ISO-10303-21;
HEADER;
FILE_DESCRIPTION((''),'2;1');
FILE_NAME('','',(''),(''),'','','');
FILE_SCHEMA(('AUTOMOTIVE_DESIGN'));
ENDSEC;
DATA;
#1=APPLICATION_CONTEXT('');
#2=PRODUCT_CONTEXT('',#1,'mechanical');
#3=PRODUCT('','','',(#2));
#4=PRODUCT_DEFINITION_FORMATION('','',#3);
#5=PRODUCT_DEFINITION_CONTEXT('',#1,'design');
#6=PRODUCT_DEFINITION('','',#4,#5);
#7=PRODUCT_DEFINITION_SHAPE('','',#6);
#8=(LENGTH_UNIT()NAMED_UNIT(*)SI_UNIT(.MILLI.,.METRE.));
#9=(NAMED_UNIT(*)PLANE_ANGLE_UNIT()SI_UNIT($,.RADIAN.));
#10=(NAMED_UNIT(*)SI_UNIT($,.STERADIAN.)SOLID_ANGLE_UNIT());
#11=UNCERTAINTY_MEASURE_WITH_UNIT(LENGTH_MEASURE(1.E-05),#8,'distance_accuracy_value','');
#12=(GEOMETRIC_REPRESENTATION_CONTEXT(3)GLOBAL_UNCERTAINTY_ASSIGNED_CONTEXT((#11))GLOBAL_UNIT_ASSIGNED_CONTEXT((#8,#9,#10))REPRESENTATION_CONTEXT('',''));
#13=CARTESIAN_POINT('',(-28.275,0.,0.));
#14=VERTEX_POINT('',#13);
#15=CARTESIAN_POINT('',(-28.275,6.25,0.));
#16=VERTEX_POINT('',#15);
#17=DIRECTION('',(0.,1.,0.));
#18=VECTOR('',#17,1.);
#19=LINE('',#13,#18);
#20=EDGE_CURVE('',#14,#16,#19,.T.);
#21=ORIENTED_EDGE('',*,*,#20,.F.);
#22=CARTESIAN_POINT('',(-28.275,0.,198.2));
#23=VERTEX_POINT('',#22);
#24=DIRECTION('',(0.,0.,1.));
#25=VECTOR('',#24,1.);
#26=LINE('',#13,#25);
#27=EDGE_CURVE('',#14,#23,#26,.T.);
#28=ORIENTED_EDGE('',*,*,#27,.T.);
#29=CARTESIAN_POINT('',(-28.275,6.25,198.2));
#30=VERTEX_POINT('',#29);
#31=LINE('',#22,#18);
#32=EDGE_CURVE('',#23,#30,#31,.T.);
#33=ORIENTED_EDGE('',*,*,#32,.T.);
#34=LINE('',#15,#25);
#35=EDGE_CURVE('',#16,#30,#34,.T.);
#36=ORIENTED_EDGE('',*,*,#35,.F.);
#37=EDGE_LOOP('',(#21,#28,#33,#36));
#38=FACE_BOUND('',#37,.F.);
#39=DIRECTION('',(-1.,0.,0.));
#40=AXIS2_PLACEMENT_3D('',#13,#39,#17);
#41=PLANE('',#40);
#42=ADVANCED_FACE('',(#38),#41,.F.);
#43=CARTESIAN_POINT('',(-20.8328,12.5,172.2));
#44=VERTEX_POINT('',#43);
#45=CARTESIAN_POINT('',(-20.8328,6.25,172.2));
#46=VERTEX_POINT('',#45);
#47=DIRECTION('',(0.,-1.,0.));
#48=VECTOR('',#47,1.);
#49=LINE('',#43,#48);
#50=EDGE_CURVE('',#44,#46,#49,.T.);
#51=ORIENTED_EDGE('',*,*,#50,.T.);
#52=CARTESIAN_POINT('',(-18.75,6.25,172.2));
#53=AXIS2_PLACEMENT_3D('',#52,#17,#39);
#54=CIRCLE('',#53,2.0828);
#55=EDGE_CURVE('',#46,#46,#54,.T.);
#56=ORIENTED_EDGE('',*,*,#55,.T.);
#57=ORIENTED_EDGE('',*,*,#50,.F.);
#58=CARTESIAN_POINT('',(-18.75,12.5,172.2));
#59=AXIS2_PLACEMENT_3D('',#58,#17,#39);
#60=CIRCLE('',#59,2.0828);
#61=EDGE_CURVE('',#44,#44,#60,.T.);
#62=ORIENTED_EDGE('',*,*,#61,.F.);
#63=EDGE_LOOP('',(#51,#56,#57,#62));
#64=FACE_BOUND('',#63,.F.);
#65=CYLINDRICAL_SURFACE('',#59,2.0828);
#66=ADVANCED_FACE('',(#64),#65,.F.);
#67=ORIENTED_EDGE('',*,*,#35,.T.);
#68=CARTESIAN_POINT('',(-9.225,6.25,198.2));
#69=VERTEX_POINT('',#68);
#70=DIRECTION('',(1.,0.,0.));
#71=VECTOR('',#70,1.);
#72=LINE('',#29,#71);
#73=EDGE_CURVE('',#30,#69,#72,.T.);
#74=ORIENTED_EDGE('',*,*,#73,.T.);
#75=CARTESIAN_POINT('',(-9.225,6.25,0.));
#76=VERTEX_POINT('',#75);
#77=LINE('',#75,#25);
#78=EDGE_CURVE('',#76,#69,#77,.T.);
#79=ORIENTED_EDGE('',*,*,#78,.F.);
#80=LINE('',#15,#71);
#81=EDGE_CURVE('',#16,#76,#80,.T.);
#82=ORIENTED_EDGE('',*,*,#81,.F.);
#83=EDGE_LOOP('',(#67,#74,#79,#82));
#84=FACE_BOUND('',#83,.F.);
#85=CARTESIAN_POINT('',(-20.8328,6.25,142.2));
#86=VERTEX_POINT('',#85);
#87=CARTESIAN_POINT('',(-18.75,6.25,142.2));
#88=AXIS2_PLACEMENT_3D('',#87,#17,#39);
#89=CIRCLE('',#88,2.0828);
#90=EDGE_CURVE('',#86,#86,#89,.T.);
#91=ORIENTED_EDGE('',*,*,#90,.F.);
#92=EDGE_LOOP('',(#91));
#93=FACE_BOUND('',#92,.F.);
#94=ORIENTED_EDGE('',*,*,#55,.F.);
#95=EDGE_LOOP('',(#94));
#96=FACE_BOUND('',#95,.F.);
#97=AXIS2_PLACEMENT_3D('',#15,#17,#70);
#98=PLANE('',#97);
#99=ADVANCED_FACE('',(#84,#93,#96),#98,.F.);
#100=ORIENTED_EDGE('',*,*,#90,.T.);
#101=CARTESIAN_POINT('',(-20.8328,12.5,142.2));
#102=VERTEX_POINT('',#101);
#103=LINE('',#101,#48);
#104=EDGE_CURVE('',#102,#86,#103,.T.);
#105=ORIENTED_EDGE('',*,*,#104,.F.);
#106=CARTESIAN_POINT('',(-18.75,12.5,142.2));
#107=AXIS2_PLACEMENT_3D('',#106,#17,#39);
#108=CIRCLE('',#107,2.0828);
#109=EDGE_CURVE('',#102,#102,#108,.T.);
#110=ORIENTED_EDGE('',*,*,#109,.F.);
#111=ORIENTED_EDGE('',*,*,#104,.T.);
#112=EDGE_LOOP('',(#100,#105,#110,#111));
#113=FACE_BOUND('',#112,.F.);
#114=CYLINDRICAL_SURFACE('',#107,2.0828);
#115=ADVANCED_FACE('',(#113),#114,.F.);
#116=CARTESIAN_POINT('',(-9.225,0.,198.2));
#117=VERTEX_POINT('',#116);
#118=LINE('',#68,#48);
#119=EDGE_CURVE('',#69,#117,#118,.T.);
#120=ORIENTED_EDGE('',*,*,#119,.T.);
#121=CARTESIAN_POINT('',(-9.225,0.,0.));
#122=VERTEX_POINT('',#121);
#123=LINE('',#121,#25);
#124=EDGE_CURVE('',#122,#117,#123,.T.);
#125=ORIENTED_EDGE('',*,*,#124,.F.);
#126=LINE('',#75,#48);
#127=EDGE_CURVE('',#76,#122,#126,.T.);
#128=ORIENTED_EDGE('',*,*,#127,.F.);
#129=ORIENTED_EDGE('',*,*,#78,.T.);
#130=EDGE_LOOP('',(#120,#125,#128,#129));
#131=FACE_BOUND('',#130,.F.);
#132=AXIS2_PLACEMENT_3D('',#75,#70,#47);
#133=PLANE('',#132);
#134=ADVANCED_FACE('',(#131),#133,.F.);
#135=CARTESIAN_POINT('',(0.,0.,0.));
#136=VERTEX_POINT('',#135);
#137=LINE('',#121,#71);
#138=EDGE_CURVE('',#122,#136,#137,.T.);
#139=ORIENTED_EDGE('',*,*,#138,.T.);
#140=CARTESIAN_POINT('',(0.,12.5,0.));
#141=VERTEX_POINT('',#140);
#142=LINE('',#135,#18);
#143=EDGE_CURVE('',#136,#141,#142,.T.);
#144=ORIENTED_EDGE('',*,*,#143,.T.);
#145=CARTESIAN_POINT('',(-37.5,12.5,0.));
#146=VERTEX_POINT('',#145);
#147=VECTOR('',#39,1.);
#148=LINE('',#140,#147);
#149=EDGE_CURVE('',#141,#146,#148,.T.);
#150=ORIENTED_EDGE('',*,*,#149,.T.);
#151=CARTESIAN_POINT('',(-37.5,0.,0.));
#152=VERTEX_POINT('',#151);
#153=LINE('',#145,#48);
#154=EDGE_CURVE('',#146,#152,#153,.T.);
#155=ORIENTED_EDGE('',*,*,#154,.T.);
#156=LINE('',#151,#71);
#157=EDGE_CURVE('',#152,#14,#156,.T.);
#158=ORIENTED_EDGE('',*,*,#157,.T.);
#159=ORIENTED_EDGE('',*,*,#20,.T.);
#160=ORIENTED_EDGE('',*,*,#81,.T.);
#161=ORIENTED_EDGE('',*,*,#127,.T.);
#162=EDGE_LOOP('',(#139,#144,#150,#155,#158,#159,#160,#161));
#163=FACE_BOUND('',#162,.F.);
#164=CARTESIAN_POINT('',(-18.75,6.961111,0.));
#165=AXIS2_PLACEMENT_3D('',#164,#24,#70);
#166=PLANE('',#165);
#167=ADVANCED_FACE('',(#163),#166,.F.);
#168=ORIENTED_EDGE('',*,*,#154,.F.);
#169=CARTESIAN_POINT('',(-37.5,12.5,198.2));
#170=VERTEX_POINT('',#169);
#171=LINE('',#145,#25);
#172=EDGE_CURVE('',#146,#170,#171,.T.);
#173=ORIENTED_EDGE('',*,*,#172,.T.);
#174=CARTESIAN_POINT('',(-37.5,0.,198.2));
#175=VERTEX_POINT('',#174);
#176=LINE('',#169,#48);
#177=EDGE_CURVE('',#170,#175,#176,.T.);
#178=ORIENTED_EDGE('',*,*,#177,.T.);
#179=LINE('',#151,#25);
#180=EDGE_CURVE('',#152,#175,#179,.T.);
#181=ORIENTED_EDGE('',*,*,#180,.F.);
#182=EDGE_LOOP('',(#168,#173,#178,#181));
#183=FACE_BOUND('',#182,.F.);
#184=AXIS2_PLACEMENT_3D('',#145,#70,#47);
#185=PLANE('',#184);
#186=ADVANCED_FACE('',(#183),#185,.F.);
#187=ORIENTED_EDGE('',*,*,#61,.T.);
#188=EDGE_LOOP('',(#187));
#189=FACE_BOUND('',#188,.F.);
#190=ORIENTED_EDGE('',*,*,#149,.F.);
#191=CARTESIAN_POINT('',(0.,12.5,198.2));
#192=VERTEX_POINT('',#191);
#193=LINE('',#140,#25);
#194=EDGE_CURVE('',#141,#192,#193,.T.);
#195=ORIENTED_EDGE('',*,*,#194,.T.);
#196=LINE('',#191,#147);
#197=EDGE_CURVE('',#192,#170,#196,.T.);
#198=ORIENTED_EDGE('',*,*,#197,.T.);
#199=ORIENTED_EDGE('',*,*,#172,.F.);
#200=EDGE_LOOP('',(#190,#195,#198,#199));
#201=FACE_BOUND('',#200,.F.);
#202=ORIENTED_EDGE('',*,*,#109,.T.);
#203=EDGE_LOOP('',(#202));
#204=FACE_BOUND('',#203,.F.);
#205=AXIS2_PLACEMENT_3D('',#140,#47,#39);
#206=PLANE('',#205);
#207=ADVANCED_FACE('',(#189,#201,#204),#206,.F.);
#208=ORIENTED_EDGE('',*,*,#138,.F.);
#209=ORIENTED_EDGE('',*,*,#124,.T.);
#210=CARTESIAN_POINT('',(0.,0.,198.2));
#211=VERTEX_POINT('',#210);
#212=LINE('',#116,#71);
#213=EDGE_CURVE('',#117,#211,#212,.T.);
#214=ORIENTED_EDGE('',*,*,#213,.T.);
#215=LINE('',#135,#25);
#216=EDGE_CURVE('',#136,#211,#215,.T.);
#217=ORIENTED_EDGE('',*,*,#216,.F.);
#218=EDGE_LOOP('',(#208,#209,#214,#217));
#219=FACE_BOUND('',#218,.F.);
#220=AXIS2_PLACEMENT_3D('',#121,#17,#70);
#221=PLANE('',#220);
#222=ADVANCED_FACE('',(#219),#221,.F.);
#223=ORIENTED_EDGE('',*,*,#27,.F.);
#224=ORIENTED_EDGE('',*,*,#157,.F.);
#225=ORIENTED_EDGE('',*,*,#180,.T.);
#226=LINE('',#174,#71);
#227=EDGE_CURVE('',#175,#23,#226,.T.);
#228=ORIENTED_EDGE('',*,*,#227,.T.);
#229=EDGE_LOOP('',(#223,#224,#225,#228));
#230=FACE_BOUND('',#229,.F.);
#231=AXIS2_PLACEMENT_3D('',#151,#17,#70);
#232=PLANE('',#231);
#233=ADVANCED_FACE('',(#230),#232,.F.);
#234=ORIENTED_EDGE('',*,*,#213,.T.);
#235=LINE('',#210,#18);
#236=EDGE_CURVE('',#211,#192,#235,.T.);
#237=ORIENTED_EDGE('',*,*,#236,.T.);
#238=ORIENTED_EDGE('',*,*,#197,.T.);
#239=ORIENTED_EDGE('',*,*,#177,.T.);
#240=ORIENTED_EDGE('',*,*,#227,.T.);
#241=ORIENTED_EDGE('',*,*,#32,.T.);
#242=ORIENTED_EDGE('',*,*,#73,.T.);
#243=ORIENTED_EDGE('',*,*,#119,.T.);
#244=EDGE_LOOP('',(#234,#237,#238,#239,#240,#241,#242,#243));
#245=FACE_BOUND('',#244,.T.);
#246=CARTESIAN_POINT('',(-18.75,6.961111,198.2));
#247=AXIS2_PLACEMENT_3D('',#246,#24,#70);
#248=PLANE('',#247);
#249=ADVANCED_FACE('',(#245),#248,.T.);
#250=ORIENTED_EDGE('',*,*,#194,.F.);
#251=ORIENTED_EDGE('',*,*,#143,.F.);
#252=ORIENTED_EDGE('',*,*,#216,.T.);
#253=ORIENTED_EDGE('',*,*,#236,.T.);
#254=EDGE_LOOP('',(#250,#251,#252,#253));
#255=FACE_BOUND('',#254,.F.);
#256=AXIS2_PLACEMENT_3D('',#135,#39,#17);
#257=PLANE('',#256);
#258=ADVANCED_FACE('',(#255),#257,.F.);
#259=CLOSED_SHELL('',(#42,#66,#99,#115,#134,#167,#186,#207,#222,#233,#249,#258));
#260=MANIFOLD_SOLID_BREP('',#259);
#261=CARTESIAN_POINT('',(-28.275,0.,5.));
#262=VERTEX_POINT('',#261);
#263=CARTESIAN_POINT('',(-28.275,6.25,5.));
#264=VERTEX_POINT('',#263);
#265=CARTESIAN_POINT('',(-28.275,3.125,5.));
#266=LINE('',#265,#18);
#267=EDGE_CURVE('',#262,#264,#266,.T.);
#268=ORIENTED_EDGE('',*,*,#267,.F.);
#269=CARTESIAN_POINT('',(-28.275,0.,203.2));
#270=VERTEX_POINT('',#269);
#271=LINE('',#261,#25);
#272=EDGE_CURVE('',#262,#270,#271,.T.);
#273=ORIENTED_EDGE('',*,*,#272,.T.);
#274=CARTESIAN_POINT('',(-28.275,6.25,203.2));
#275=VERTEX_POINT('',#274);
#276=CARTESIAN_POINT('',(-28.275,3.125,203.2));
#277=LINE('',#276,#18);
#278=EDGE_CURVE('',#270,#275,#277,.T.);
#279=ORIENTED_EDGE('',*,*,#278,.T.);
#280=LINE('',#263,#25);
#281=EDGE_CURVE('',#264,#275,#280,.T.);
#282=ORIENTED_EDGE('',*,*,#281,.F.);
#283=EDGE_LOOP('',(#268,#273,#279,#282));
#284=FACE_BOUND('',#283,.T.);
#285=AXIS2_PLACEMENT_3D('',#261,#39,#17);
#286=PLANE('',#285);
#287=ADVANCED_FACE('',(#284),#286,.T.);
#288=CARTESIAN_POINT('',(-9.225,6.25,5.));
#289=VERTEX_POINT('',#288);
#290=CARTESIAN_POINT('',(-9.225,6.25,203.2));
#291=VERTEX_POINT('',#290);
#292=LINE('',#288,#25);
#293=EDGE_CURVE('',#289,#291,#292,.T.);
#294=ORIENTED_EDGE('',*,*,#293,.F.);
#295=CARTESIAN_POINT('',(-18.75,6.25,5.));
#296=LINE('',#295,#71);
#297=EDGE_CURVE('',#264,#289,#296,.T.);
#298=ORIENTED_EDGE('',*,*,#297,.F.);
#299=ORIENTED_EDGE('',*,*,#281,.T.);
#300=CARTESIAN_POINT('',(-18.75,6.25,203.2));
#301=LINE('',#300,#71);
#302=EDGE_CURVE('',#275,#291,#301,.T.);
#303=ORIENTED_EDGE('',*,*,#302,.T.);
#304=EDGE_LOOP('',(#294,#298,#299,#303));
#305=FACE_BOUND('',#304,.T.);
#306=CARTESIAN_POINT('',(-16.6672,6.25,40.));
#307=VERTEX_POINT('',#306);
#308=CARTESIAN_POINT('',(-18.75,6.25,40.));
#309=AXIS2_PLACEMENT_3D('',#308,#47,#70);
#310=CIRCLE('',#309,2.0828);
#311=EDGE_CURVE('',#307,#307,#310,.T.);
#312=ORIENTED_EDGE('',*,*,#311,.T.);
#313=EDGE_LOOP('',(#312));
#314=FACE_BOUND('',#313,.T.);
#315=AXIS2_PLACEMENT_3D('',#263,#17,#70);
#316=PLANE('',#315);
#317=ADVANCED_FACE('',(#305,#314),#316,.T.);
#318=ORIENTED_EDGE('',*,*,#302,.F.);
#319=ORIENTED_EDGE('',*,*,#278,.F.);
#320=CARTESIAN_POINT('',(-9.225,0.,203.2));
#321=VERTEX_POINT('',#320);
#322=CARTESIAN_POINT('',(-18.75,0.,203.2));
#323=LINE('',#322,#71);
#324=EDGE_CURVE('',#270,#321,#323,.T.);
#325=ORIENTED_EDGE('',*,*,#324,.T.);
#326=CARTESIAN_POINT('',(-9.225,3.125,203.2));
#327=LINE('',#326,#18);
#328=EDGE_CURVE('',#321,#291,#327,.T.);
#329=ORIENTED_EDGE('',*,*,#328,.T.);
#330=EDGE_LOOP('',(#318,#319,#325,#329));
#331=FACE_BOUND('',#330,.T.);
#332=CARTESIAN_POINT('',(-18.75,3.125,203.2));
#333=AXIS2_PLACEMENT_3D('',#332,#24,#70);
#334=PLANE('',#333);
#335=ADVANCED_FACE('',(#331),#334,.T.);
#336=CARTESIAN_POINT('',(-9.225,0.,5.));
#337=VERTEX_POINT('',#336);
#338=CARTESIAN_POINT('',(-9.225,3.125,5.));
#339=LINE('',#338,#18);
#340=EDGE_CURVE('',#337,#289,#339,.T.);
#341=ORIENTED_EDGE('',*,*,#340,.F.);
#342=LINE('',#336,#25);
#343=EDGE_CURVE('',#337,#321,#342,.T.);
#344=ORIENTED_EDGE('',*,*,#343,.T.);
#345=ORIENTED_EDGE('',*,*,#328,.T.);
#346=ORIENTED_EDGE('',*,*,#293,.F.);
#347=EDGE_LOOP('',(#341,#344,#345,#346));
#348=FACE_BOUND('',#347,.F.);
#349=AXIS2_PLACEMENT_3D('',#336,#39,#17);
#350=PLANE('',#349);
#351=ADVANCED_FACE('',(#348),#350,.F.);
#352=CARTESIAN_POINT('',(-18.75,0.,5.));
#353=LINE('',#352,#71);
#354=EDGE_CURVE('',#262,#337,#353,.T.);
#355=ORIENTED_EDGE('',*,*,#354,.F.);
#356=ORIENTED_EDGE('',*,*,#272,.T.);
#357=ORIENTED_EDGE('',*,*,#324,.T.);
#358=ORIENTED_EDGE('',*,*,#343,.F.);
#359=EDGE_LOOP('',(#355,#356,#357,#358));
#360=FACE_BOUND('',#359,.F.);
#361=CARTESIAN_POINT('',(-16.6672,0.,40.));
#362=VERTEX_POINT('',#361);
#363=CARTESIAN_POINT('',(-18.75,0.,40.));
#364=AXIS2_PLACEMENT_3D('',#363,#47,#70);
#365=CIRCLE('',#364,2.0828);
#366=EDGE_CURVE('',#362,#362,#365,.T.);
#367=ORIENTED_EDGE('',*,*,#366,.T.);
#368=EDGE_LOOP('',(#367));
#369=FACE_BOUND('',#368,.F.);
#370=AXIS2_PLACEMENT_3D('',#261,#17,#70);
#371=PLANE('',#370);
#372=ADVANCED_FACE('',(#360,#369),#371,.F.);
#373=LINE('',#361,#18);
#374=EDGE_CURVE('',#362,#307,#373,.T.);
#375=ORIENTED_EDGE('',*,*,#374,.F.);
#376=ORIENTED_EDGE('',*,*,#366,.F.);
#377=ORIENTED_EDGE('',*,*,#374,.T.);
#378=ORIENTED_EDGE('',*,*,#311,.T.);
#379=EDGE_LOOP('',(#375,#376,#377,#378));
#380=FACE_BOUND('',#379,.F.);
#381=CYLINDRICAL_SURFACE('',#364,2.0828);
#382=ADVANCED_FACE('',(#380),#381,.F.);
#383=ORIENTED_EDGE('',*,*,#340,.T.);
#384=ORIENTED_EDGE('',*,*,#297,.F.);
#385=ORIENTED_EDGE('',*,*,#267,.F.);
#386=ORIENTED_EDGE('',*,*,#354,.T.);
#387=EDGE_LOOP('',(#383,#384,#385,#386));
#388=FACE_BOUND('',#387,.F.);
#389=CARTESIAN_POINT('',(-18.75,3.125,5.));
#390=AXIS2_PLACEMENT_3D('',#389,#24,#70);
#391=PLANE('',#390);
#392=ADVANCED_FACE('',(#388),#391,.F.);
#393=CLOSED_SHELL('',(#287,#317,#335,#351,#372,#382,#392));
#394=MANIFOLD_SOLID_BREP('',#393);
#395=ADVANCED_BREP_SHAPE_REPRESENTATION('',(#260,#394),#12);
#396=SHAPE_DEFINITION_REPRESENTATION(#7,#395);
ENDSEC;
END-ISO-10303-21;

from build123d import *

# Parameters (mm, degrees)
F2_DEPTH = 198.2
F3_START = 5
F1_W     = 19.05
F1_H     = 6.25
F3_DEPTH = 198.2
F4_R     = 2.0828
F5_DEPTH = 12.501
F6_R     = 2.0828
F7_DEPTH = 25


# Not quite as in the source:
# - a feature names something its author has since deleted; it is built from what else it names


with BuildPart() as f2:
    # F1 (on Top) → F2 (new body, through all)
    with BuildSketch(Plane.XY):
        Polygon((-9.225, 0), (0, 0), (0, 12.5), (-37.5, 12.5), (-37.5, 0), (-28.275, 0), (-28.275, 6.25), (-9.225, 6.25), align=None)
    extrude(amount=F2_DEPTH)

    # F6 (on face) → F7 (cut)
    with BuildSketch(Plane(origin=(0, 12.5, 0), x_dir=(-1, 0, 0), z_dir=(0, 1, 0))):
        with Locations((18.75, 142.2)):
            Circle(F6_R)
        with Locations((18.75, 172.2)):
            Circle(F6_R)
    extrude(amount=-F7_DEPTH, mode=Mode.SUBTRACT)


with BuildPart() as f3:
    # F1 (on Top) → F3 (new body)
    with BuildSketch(Plane.XY.offset(F3_START)):
        with Locations((-18.75, 3.125)):
            Rectangle(F1_W, F1_H)
    extrude(amount=F3_DEPTH)

    # F4 (on face) → F5 (cut, through all)
    with BuildSketch(Plane.XZ):
        with Locations((-18.75, 40)):
            Circle(F4_R)
    extrude(amount=-F5_DEPTH, mode=Mode.SUBTRACT)


solid = Compound([f2.part, f3.part])
